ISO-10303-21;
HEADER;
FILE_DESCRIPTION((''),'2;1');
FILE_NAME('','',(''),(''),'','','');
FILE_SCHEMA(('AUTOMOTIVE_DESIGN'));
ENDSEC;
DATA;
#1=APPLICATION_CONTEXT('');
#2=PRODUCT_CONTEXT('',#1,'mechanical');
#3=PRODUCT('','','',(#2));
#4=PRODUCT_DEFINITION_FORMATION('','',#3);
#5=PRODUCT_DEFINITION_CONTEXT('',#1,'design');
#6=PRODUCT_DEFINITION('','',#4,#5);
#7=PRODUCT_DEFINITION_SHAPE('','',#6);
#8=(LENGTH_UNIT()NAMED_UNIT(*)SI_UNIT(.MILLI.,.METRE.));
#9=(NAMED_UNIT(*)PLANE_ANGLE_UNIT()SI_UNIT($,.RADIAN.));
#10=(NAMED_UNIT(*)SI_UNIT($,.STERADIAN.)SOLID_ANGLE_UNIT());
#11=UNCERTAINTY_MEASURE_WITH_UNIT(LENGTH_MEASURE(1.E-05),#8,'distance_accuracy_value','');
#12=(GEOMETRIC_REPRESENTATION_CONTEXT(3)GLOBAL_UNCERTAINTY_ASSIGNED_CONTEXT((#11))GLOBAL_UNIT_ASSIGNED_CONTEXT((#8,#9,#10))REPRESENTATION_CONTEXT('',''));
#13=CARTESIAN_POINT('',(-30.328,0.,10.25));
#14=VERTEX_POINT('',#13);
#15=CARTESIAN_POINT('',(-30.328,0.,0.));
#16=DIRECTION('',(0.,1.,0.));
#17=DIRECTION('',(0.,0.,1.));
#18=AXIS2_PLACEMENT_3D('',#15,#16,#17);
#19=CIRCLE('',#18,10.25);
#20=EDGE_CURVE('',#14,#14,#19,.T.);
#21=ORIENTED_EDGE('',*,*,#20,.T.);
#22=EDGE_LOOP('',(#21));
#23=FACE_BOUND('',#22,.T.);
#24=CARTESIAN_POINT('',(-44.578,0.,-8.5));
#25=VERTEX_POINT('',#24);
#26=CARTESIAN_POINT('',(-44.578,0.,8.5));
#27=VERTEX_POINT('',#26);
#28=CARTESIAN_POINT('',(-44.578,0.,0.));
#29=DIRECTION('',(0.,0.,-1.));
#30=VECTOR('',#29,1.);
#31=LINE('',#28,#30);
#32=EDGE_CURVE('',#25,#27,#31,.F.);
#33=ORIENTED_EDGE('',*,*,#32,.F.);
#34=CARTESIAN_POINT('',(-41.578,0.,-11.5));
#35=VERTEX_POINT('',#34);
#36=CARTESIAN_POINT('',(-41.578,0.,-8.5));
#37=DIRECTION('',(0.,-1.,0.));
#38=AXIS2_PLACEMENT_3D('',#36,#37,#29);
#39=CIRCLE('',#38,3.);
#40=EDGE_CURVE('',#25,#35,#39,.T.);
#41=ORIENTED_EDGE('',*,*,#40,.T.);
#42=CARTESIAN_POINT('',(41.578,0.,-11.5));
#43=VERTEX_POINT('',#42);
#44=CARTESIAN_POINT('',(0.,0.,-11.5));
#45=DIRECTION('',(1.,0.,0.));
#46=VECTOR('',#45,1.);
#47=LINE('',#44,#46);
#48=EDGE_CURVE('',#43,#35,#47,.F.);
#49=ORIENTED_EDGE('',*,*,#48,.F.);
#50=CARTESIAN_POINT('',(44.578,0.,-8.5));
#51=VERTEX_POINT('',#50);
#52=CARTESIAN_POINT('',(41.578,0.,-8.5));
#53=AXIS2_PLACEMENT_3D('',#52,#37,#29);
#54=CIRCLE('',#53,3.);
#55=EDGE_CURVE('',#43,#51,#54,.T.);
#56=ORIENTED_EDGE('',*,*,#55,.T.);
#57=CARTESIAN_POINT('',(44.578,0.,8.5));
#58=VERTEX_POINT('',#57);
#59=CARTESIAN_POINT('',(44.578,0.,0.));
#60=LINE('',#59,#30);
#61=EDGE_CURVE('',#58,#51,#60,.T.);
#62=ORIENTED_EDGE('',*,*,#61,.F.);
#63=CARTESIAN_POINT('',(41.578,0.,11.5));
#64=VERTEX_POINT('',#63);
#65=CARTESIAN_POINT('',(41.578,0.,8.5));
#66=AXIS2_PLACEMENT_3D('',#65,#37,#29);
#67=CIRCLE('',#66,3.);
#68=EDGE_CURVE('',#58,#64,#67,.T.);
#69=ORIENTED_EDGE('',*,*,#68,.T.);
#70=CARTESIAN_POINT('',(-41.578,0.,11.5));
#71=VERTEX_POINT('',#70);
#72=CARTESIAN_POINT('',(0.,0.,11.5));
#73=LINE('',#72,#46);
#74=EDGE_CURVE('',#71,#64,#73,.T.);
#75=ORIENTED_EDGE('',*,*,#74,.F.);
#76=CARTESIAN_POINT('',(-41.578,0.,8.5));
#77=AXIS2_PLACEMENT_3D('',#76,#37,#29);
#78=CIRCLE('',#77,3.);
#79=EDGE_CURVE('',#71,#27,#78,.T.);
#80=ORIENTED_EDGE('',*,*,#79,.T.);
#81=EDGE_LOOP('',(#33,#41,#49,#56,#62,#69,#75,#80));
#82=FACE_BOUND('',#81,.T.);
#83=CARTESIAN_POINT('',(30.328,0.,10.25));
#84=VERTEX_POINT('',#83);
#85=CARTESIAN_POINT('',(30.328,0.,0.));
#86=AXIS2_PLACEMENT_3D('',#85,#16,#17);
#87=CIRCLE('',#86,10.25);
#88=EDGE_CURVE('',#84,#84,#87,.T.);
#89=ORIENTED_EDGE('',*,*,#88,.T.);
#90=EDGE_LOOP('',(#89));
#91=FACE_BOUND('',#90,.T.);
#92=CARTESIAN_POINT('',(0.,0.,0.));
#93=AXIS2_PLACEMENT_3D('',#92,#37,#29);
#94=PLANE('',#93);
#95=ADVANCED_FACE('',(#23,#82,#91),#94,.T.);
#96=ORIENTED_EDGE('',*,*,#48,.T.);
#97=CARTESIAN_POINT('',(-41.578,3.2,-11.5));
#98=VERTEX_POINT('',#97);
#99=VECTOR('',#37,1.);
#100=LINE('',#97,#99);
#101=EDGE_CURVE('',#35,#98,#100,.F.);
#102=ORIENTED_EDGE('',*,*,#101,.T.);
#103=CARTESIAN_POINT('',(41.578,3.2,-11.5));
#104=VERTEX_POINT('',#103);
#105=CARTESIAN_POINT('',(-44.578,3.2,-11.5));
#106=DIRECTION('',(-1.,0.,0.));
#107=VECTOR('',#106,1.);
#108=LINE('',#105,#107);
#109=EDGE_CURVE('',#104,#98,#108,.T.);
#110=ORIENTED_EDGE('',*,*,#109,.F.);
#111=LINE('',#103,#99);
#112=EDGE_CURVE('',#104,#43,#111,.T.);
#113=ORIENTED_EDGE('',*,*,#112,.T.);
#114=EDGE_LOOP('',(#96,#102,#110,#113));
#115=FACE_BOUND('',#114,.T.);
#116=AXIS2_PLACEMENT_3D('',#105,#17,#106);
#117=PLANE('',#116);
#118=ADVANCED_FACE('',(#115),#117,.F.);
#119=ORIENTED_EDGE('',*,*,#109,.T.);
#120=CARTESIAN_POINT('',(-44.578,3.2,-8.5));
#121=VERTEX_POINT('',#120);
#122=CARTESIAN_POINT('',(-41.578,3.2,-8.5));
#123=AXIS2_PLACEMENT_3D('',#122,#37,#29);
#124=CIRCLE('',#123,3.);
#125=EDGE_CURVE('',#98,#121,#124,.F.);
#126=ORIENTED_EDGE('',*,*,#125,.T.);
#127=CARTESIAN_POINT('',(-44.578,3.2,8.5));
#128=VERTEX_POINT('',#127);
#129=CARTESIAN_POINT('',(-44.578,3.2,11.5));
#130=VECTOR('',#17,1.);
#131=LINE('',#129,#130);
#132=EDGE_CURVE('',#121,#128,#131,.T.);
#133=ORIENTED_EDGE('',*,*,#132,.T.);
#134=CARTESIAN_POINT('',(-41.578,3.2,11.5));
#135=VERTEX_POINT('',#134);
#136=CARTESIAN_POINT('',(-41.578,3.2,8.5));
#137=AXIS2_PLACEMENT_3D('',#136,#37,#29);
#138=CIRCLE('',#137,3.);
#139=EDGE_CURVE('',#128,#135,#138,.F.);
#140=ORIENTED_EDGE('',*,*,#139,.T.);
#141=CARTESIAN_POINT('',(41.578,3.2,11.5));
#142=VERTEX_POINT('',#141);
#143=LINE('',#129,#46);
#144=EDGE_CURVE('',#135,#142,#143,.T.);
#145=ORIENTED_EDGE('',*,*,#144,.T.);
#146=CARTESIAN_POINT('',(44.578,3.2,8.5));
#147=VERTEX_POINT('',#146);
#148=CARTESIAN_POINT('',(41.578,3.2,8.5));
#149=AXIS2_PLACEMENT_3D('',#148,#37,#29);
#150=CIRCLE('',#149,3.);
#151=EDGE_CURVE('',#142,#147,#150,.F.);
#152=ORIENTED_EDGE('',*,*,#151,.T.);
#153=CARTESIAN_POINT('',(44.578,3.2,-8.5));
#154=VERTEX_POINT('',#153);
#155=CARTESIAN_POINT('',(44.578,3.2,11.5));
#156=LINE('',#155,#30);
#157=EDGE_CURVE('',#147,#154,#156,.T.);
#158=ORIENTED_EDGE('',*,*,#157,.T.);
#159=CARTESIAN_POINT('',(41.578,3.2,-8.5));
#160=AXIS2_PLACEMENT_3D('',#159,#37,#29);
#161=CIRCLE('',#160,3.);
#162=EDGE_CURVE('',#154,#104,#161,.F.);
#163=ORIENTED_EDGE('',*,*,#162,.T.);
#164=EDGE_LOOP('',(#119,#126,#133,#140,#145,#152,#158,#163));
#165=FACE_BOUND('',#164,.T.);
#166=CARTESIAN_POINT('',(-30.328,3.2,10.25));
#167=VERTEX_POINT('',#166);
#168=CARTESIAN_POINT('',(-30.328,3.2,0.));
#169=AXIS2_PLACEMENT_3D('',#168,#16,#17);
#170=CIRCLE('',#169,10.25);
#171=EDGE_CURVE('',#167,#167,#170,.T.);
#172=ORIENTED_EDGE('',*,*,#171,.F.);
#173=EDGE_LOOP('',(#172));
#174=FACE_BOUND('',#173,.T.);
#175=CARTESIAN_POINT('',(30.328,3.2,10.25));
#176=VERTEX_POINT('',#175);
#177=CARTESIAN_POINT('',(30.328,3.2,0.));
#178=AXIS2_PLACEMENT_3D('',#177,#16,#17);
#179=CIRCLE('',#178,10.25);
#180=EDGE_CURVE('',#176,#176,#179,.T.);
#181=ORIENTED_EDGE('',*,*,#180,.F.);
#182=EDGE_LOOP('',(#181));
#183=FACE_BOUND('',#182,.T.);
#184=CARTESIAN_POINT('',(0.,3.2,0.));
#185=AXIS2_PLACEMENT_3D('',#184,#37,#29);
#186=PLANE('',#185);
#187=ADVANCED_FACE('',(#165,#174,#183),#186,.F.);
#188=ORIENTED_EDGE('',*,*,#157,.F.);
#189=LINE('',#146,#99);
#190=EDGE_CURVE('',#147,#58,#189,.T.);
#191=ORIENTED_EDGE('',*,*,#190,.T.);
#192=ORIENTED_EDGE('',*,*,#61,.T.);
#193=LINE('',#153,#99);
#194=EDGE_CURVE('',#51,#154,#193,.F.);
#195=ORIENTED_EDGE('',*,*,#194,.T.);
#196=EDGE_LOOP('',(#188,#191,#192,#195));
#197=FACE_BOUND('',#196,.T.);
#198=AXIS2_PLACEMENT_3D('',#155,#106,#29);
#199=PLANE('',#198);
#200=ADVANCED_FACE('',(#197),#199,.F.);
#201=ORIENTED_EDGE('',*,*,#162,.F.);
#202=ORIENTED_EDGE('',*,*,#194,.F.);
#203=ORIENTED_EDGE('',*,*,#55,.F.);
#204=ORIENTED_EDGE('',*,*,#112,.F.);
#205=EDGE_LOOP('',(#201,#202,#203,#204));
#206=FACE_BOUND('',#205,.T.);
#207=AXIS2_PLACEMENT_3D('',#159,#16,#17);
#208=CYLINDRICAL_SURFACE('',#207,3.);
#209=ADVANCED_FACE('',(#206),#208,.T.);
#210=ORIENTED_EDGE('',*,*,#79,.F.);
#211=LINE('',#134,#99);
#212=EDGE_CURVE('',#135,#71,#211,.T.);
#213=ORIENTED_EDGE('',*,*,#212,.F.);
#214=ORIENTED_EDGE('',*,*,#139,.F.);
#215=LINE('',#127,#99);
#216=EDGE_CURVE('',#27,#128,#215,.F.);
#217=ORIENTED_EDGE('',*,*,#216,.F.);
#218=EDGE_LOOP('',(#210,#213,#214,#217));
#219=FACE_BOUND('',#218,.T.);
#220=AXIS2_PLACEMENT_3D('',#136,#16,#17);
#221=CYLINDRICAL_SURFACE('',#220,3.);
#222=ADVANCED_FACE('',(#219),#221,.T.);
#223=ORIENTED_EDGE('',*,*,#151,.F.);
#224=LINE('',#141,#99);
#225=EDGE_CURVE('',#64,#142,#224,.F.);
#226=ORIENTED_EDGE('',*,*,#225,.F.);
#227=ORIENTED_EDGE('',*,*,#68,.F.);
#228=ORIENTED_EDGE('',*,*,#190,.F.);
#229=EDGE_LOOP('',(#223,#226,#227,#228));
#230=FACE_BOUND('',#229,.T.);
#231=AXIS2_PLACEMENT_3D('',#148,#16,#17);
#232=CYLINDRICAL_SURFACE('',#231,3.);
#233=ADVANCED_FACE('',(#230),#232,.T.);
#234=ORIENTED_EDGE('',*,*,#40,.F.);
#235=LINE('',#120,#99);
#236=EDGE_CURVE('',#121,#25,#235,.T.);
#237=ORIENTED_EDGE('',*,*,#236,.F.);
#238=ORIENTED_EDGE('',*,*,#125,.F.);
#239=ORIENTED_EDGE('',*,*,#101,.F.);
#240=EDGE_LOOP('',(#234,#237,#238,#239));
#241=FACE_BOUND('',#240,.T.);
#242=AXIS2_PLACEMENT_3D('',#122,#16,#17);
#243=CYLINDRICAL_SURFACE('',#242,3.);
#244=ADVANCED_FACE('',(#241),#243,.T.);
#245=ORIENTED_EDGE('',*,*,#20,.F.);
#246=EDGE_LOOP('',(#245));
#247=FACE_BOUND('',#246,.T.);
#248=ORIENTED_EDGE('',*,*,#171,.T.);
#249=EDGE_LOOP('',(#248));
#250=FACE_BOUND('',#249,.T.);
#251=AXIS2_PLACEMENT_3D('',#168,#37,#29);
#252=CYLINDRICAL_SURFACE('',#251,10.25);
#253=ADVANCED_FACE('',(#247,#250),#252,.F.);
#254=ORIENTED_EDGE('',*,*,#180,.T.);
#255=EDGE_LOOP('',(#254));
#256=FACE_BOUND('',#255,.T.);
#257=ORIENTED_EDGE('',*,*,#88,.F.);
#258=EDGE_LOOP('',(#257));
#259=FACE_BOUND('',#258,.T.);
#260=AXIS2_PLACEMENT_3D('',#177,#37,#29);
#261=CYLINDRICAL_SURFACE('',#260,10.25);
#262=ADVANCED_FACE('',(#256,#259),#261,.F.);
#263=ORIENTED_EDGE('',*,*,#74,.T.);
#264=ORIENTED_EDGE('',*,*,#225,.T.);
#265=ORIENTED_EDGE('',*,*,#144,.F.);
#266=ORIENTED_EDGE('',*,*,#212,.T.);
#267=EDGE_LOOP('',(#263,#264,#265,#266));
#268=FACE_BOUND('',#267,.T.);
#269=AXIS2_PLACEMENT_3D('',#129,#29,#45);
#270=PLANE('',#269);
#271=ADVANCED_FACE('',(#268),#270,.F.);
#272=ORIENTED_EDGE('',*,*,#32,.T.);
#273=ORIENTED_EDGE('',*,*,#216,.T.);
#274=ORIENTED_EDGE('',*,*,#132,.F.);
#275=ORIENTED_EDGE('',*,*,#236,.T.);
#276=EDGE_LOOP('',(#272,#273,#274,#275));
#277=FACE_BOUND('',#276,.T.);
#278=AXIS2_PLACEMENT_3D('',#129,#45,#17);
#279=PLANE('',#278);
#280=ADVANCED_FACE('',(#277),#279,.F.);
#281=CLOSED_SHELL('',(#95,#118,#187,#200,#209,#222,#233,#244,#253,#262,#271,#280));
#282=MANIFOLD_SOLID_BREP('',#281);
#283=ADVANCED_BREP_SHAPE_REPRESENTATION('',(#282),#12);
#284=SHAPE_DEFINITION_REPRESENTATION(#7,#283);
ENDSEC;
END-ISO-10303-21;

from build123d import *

# Parameters (mm, degrees)
SKETCH1_W           = 89.156
SKETCH1_H           = 23
SKETCH1_R           = 10.25
BOSS_EXTRUDE1_DEPTH = 3.2
FILLET1_R           = 3


with BuildPart() as part:
    # Sketch1 → Boss-Extrude1 (new body)
    with BuildSketch(Plane(origin=(0, 0, 0), x_dir=(1, 0, 0), z_dir=(0, 1, 0))):
        Rectangle(SKETCH1_W, SKETCH1_H)
        with Locations(Location((30.328, 0, 0), (0, 0, 270))):
            Circle(SKETCH1_R, mode=Mode.SUBTRACT)
        with Locations(Location((-30.328, 0, 0), (0, 0, 270))):
            Circle(SKETCH1_R, mode=Mode.SUBTRACT)
    extrude(amount=BOSS_EXTRUDE1_DEPTH)

    # Fillet1
    fillet1_edges = [part.edges().sort_by_distance(p)[0] for p in [
        (44.578, 1.6, -11.5),
        (44.578, 1.6, 11.5),
        (-44.578, 1.6, 11.5),
        (-44.578, 1.6, -11.5),
    ]]
    fillet(fillet1_edges, radius=FILLET1_R)


solid = part.part
